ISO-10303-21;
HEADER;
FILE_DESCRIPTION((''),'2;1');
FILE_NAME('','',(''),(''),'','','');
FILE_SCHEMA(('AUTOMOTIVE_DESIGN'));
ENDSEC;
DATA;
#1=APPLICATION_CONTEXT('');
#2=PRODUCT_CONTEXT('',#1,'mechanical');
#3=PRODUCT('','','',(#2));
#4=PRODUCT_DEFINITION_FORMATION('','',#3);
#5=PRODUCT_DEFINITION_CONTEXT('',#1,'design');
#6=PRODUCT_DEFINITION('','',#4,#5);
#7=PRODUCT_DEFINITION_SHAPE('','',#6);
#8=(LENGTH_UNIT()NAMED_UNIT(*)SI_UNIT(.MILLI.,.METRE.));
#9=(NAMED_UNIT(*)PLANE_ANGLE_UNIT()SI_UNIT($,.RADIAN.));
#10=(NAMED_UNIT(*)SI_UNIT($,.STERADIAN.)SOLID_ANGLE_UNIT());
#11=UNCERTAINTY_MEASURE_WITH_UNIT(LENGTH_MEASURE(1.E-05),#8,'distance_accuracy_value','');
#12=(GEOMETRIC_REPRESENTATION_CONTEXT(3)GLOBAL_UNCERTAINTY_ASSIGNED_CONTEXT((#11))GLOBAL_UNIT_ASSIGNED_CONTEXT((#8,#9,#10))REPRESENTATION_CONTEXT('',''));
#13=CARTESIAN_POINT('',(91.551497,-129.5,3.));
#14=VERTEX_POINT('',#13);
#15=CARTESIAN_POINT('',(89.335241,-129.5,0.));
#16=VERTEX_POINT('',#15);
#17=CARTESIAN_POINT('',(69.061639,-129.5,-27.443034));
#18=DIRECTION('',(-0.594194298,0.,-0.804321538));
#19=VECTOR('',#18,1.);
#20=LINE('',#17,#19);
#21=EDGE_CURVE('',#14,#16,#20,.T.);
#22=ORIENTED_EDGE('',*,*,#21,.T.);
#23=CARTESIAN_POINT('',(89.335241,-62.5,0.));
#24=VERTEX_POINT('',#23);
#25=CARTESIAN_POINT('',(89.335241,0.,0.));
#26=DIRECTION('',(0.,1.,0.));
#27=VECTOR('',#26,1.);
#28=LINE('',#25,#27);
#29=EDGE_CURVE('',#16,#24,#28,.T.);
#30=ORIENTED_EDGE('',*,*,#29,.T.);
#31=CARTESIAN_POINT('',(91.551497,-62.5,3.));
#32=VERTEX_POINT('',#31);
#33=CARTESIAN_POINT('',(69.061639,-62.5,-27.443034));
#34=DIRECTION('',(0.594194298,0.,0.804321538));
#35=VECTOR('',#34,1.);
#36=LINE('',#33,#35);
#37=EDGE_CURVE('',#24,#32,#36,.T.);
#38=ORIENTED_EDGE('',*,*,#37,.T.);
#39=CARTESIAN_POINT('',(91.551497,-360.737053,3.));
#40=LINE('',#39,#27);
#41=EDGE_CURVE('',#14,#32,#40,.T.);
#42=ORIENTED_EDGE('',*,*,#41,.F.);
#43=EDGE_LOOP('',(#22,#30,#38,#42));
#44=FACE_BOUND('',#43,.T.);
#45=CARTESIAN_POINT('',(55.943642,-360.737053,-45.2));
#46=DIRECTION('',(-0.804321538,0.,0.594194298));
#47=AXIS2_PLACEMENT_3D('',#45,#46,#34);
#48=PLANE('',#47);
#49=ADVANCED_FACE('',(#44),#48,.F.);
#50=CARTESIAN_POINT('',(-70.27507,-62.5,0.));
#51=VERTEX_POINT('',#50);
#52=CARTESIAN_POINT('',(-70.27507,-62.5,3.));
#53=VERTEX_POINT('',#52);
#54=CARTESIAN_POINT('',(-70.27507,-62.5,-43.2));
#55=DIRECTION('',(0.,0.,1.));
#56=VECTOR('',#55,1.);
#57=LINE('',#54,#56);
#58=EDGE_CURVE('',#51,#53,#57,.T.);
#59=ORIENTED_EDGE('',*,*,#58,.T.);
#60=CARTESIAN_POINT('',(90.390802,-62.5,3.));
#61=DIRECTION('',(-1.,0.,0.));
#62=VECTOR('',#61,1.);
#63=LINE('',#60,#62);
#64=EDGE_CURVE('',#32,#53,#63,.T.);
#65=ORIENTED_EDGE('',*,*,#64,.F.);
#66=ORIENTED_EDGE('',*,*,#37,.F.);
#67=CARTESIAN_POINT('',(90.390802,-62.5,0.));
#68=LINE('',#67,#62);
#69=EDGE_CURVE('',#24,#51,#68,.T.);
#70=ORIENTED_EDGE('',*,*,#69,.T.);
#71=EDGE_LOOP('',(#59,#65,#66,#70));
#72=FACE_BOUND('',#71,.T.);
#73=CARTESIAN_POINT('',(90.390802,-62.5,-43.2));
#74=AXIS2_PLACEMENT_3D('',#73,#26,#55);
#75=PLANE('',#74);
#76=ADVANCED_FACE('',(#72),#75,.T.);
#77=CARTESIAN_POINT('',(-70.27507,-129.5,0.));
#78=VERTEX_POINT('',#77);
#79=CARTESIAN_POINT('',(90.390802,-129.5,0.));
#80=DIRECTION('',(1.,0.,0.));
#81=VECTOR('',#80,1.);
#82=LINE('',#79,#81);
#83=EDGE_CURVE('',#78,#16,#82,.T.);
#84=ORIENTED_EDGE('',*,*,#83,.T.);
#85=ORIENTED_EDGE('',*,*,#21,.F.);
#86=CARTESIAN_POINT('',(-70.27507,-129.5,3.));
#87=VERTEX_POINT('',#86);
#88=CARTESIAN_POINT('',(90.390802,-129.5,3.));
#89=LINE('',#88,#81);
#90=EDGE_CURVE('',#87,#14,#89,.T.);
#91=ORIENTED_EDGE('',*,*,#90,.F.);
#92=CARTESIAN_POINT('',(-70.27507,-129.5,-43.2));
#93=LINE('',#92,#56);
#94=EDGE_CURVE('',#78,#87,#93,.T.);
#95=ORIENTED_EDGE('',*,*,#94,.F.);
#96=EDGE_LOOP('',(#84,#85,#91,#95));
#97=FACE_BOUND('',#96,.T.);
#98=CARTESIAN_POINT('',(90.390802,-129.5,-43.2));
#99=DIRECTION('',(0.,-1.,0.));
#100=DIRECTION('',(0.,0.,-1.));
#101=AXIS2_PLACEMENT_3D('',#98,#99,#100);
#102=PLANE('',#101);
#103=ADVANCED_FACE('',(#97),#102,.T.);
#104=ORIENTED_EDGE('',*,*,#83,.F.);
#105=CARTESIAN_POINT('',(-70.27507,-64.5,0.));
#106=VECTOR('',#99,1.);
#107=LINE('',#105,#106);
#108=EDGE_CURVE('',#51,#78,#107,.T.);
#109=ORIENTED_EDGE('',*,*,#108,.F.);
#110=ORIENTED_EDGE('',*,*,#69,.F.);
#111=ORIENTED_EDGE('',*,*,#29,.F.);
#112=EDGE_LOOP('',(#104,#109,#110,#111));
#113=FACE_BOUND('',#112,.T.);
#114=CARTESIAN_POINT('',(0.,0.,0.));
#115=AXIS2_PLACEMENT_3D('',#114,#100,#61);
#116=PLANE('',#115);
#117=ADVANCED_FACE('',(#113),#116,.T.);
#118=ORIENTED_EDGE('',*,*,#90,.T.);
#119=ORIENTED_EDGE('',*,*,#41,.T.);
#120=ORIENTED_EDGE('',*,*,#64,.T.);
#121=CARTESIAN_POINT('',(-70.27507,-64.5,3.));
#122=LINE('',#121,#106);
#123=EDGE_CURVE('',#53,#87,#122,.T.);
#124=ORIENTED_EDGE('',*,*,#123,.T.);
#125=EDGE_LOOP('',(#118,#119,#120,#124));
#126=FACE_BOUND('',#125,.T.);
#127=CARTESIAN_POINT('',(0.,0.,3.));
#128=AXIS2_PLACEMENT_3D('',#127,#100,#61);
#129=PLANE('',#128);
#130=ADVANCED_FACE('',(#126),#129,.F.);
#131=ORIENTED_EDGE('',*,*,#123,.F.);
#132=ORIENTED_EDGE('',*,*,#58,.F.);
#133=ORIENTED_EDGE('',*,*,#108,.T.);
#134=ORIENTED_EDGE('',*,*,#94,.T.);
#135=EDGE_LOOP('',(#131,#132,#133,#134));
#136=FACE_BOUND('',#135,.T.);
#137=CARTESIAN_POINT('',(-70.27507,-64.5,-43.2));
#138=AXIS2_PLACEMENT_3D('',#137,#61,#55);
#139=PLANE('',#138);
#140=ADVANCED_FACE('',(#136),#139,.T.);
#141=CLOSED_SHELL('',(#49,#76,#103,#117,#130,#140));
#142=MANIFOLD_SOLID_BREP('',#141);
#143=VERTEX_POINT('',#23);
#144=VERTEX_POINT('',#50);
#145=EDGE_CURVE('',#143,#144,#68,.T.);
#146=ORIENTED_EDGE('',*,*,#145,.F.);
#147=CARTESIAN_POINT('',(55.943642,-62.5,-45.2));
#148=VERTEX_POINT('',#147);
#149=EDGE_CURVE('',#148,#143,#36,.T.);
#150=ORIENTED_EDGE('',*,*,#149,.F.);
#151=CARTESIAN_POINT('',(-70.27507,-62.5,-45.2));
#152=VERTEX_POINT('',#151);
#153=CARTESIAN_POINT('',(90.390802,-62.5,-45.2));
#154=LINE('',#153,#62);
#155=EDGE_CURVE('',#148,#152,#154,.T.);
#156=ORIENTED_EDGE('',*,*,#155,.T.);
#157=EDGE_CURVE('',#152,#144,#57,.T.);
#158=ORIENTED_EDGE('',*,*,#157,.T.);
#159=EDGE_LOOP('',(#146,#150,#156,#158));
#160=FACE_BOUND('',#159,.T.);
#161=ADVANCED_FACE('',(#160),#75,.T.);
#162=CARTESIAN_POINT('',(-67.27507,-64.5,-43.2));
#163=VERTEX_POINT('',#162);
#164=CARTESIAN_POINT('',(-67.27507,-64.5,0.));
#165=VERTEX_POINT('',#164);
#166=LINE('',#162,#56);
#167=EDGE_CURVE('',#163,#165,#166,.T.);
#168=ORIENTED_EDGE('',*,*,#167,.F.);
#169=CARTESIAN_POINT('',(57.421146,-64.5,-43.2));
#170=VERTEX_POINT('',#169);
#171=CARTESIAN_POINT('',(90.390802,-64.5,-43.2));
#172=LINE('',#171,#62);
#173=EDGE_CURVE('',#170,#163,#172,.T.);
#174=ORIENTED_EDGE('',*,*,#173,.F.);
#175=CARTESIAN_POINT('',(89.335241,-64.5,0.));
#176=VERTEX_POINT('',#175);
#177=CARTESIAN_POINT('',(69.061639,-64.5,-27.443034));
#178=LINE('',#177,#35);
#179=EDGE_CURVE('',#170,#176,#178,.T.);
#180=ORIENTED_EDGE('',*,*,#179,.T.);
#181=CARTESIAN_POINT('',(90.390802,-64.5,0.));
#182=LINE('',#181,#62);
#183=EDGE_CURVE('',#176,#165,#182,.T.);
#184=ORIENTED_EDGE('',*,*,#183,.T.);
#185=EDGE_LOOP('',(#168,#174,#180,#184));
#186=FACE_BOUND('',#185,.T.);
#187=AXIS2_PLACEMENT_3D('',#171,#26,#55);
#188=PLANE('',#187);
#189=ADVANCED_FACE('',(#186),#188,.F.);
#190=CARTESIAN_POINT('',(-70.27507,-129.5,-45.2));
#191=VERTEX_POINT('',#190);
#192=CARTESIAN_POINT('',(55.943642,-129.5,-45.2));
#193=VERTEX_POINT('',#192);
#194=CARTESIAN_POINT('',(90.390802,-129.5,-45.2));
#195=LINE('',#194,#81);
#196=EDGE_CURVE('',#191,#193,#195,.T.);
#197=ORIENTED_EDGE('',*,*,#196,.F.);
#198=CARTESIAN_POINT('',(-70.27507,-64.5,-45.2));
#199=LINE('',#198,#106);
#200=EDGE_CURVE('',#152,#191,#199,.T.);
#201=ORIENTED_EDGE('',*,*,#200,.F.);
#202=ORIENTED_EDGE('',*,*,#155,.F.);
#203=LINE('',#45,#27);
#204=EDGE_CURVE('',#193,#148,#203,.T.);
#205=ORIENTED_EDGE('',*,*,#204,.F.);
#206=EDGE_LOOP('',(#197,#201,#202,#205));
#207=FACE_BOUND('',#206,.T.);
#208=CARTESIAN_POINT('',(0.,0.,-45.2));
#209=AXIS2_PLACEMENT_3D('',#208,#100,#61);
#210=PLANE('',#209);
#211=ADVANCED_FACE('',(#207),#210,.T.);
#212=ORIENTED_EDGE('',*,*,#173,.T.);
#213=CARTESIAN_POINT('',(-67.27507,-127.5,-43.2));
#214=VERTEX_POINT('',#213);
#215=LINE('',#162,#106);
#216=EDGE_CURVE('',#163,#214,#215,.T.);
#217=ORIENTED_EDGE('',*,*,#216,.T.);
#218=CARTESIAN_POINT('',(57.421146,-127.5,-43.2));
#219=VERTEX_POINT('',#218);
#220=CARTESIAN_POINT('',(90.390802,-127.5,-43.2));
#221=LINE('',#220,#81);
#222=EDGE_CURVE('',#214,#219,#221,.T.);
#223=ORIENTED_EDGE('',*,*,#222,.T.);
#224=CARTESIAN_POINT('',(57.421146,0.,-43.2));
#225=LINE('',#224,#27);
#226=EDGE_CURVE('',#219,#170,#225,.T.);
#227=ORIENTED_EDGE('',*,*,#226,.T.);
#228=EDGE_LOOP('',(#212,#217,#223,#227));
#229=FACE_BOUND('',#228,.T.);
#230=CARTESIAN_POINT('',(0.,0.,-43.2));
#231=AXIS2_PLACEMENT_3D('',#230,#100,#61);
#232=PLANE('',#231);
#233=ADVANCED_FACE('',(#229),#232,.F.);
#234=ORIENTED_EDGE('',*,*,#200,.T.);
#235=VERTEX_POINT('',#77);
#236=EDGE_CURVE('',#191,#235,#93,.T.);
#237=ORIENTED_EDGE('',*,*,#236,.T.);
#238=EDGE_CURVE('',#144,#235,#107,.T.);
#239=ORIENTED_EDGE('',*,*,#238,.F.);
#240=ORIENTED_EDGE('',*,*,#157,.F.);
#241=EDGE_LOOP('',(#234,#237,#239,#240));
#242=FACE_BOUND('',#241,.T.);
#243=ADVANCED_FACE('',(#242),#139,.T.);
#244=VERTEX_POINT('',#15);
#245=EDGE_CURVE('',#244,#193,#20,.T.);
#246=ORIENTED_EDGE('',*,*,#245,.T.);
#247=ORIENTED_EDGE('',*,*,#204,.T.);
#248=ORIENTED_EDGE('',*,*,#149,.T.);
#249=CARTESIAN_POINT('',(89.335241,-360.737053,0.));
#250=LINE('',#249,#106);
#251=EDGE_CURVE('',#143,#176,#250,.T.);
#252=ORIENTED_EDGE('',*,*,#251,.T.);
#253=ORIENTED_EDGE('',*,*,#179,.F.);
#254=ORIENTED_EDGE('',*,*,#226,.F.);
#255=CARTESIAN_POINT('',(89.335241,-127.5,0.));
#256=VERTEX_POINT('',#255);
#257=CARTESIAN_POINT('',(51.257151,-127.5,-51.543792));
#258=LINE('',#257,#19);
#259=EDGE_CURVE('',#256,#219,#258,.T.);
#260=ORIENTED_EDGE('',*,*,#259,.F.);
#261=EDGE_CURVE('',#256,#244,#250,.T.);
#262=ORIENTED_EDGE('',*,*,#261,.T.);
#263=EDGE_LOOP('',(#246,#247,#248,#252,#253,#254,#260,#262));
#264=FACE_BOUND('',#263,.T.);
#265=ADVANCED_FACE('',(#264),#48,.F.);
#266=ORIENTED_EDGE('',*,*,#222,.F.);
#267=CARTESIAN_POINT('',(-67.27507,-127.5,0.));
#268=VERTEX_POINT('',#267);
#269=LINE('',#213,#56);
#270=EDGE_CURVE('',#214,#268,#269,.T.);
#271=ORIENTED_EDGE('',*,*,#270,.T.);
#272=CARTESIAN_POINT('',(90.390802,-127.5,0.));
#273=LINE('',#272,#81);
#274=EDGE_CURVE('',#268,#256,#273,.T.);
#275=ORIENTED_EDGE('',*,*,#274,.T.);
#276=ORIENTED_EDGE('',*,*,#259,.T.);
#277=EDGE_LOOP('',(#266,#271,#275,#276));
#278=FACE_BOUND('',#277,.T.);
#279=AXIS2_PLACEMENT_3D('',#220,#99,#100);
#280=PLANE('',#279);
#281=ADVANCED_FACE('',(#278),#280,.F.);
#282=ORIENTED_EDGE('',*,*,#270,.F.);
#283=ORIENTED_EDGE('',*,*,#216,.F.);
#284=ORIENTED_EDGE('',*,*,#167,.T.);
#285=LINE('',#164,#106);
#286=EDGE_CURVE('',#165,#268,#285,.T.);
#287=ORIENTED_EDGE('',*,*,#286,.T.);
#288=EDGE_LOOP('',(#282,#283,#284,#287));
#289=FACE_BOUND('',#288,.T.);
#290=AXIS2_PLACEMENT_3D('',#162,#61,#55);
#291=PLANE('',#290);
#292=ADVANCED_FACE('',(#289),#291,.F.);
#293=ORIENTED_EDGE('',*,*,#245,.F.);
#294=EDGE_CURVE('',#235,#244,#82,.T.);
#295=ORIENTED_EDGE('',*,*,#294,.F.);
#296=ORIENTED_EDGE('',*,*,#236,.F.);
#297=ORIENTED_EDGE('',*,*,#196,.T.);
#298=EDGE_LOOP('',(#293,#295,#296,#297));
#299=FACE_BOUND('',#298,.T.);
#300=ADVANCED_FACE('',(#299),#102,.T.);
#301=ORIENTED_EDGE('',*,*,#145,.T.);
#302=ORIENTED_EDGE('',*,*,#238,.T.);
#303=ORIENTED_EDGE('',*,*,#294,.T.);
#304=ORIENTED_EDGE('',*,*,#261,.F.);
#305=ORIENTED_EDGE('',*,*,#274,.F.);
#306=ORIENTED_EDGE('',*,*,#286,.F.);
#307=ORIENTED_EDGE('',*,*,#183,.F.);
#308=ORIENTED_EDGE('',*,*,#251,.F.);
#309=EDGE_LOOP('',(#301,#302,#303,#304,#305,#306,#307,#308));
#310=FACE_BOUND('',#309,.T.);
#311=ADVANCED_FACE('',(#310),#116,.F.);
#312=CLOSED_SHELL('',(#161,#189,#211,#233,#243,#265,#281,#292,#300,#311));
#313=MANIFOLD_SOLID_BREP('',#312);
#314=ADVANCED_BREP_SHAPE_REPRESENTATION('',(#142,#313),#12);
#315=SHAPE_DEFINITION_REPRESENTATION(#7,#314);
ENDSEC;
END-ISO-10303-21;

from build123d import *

# Parameters (mm, degrees)
SZKIC1_W                        = 157.665871289
SZKIC1_H                        = 63
DODANIE_WYCI_GNI_CIE1_DEPTH     = 43.2
WYTNIJ_WYCI_GNI_CIE1_DEPTH      = 70
SKORUPA3_START                  = -70.275069684
SKORUPA3_OUTLINE_W              = 67
SKORUPA3_OUTLINE_H              = 48.2
SKORUPA3_DEPTH                  = 3
SKORUPA3_START_2                = -127.5
SKORUPA3_2_DEPTH                = 63
SKORUPA3_START_3                = -129.5
SKORUPA3_3_DEPTH                = 67
SKORUPA3_4_DEPTH                = 2
SKORUPA3_START_4                = -64.5
SKORUPA3_5_DEPTH                = 2
WYTNIJ_WYCI_GNI_CIE3_DEPTH      = 125.94228845
WYTNIJ_WYCI_GNI_CIE3_DEPTH_BACK = 125.94228845


with BuildPart() as part:
    # Szkic1 → Dodanie-wyciągnięcie1 (new body)
    with BuildSketch(Plane.XY):
        with Locations((11.557865961, -96)):
            Rectangle(SZKIC1_W, SZKIC1_H)
    extrude(amount=-DODANIE_WYCI_GNI_CIE1_DEPTH)

    # Szkic2 → Wytnij-wyciągnięcie1 (cut)
    with BuildSketch(Plane.XZ.offset(127.5)):
        Polygon((91.579553956, 3.037978518), (97.149949113, -5.556810967), (99.754808073, -53.374579011), (51.257151272, -51.543792256), align=None)
    extrude(amount=-WYTNIJ_WYCI_GNI_CIE1_DEPTH, mode=Mode.SUBTRACT)

    # Skorupa3: read off the stored shape, not the designer's step
    # Skorupa3 outline → Skorupa3 (add)
    with BuildSketch(Plane.YZ.offset(SKORUPA3_START)):
        with Locations((-96, -21.1)):
            Rectangle(SKORUPA3_OUTLINE_W, SKORUPA3_OUTLINE_H)
    extrude(amount=SKORUPA3_DEPTH)

    # Skorupa3 2 outline → Skorupa3 2 (cut)
    with BuildSketch(Plane(origin=(0, 0, 0), x_dir=(1, 0, 0), z_dir=(0, 1, 0)).offset(SKORUPA3_START_2)):
        Polygon((57.421146073, 43.2), (-67.275069684, 43.2), (-67.275069684, 0), (89.335240673, 0), align=None)
    extrude(amount=SKORUPA3_2_DEPTH, mode=Mode.SUBTRACT)

    # Skorupa3 3 outline → Skorupa3 3 (add)
    with BuildSketch(Plane(origin=(0, 0, 0), x_dir=(1, 0, 0), z_dir=(0, 1, 0)).offset(SKORUPA3_START_3)):
        Polygon((95.281348873, -3), (59.673493323, 45.2), (-67.275069684, 45.2), (-67.275069684, 43.2), (57.421146073, 43.2), (89.335240673, 0), (-67.275069684, 0), (-67.275069684, -3), align=None)
    extrude(amount=SKORUPA3_3_DEPTH)

    # Skorupa3 4 outline → Skorupa3 4 (add)
    with BuildSketch(Plane(origin=(0, 0, 0), x_dir=(1, 0, 0), z_dir=(0, 1, 0)).offset(SKORUPA3_START_3)):
        Polygon((57.421146073, 43.2), (-67.275069684, 43.2), (-67.275069684, 0), (89.335240673, 0), align=None)
    extrude(amount=SKORUPA3_4_DEPTH)

    # Skorupa3 5 outline → Skorupa3 5 (add)
    with BuildSketch(Plane(origin=(0, 0, 0), x_dir=(1, 0, 0), z_dir=(0, 1, 0)).offset(SKORUPA3_START_4)):
        Polygon((57.421146073, 43.2), (-67.275069684, 43.2), (-67.275069684, 0), (89.335240673, 0), align=None)
    extrude(amount=SKORUPA3_5_DEPTH)

    # Szkic6 → Wytnij-wyciągnięcie3 (cut, two sides: drawn at the far end of the back side and taken through both)
    with BuildSketch(Plane.XZ.offset(129.5).offset(-WYTNIJ_WYCI_GNI_CIE3_DEPTH_BACK)):
        Polygon((-150.660373393, -324.866196497), (55.943641693, -45.2), (91.551497243, 3), (298.155512329, 282.666196497), (857.487905323, -130.541833674), (408.672019601, -738.074226668), align=None)
    extrude(amount=WYTNIJ_WYCI_GNI_CIE3_DEPTH + WYTNIJ_WYCI_GNI_CIE3_DEPTH_BACK, mode=Mode.SUBTRACT)


with BuildPart() as body_2:
    # Podziel3: the piece on the far side of the plane
    add(part.part)
    split(bisect_by=Plane(origin=(0, 0, 0), x_dir=(-1, 0, 0), z_dir=(0, 0, -1)), keep=Keep.BOTTOM)


with BuildPart() as part_1:
    add(part.part)

    # Podziel3
    split(bisect_by=Plane(origin=(0, 0, 0), x_dir=(-1, 0, 0), z_dir=(0, 0, -1)), keep=Keep.TOP)


solid = Compound([body_2.part, part_1.part])
